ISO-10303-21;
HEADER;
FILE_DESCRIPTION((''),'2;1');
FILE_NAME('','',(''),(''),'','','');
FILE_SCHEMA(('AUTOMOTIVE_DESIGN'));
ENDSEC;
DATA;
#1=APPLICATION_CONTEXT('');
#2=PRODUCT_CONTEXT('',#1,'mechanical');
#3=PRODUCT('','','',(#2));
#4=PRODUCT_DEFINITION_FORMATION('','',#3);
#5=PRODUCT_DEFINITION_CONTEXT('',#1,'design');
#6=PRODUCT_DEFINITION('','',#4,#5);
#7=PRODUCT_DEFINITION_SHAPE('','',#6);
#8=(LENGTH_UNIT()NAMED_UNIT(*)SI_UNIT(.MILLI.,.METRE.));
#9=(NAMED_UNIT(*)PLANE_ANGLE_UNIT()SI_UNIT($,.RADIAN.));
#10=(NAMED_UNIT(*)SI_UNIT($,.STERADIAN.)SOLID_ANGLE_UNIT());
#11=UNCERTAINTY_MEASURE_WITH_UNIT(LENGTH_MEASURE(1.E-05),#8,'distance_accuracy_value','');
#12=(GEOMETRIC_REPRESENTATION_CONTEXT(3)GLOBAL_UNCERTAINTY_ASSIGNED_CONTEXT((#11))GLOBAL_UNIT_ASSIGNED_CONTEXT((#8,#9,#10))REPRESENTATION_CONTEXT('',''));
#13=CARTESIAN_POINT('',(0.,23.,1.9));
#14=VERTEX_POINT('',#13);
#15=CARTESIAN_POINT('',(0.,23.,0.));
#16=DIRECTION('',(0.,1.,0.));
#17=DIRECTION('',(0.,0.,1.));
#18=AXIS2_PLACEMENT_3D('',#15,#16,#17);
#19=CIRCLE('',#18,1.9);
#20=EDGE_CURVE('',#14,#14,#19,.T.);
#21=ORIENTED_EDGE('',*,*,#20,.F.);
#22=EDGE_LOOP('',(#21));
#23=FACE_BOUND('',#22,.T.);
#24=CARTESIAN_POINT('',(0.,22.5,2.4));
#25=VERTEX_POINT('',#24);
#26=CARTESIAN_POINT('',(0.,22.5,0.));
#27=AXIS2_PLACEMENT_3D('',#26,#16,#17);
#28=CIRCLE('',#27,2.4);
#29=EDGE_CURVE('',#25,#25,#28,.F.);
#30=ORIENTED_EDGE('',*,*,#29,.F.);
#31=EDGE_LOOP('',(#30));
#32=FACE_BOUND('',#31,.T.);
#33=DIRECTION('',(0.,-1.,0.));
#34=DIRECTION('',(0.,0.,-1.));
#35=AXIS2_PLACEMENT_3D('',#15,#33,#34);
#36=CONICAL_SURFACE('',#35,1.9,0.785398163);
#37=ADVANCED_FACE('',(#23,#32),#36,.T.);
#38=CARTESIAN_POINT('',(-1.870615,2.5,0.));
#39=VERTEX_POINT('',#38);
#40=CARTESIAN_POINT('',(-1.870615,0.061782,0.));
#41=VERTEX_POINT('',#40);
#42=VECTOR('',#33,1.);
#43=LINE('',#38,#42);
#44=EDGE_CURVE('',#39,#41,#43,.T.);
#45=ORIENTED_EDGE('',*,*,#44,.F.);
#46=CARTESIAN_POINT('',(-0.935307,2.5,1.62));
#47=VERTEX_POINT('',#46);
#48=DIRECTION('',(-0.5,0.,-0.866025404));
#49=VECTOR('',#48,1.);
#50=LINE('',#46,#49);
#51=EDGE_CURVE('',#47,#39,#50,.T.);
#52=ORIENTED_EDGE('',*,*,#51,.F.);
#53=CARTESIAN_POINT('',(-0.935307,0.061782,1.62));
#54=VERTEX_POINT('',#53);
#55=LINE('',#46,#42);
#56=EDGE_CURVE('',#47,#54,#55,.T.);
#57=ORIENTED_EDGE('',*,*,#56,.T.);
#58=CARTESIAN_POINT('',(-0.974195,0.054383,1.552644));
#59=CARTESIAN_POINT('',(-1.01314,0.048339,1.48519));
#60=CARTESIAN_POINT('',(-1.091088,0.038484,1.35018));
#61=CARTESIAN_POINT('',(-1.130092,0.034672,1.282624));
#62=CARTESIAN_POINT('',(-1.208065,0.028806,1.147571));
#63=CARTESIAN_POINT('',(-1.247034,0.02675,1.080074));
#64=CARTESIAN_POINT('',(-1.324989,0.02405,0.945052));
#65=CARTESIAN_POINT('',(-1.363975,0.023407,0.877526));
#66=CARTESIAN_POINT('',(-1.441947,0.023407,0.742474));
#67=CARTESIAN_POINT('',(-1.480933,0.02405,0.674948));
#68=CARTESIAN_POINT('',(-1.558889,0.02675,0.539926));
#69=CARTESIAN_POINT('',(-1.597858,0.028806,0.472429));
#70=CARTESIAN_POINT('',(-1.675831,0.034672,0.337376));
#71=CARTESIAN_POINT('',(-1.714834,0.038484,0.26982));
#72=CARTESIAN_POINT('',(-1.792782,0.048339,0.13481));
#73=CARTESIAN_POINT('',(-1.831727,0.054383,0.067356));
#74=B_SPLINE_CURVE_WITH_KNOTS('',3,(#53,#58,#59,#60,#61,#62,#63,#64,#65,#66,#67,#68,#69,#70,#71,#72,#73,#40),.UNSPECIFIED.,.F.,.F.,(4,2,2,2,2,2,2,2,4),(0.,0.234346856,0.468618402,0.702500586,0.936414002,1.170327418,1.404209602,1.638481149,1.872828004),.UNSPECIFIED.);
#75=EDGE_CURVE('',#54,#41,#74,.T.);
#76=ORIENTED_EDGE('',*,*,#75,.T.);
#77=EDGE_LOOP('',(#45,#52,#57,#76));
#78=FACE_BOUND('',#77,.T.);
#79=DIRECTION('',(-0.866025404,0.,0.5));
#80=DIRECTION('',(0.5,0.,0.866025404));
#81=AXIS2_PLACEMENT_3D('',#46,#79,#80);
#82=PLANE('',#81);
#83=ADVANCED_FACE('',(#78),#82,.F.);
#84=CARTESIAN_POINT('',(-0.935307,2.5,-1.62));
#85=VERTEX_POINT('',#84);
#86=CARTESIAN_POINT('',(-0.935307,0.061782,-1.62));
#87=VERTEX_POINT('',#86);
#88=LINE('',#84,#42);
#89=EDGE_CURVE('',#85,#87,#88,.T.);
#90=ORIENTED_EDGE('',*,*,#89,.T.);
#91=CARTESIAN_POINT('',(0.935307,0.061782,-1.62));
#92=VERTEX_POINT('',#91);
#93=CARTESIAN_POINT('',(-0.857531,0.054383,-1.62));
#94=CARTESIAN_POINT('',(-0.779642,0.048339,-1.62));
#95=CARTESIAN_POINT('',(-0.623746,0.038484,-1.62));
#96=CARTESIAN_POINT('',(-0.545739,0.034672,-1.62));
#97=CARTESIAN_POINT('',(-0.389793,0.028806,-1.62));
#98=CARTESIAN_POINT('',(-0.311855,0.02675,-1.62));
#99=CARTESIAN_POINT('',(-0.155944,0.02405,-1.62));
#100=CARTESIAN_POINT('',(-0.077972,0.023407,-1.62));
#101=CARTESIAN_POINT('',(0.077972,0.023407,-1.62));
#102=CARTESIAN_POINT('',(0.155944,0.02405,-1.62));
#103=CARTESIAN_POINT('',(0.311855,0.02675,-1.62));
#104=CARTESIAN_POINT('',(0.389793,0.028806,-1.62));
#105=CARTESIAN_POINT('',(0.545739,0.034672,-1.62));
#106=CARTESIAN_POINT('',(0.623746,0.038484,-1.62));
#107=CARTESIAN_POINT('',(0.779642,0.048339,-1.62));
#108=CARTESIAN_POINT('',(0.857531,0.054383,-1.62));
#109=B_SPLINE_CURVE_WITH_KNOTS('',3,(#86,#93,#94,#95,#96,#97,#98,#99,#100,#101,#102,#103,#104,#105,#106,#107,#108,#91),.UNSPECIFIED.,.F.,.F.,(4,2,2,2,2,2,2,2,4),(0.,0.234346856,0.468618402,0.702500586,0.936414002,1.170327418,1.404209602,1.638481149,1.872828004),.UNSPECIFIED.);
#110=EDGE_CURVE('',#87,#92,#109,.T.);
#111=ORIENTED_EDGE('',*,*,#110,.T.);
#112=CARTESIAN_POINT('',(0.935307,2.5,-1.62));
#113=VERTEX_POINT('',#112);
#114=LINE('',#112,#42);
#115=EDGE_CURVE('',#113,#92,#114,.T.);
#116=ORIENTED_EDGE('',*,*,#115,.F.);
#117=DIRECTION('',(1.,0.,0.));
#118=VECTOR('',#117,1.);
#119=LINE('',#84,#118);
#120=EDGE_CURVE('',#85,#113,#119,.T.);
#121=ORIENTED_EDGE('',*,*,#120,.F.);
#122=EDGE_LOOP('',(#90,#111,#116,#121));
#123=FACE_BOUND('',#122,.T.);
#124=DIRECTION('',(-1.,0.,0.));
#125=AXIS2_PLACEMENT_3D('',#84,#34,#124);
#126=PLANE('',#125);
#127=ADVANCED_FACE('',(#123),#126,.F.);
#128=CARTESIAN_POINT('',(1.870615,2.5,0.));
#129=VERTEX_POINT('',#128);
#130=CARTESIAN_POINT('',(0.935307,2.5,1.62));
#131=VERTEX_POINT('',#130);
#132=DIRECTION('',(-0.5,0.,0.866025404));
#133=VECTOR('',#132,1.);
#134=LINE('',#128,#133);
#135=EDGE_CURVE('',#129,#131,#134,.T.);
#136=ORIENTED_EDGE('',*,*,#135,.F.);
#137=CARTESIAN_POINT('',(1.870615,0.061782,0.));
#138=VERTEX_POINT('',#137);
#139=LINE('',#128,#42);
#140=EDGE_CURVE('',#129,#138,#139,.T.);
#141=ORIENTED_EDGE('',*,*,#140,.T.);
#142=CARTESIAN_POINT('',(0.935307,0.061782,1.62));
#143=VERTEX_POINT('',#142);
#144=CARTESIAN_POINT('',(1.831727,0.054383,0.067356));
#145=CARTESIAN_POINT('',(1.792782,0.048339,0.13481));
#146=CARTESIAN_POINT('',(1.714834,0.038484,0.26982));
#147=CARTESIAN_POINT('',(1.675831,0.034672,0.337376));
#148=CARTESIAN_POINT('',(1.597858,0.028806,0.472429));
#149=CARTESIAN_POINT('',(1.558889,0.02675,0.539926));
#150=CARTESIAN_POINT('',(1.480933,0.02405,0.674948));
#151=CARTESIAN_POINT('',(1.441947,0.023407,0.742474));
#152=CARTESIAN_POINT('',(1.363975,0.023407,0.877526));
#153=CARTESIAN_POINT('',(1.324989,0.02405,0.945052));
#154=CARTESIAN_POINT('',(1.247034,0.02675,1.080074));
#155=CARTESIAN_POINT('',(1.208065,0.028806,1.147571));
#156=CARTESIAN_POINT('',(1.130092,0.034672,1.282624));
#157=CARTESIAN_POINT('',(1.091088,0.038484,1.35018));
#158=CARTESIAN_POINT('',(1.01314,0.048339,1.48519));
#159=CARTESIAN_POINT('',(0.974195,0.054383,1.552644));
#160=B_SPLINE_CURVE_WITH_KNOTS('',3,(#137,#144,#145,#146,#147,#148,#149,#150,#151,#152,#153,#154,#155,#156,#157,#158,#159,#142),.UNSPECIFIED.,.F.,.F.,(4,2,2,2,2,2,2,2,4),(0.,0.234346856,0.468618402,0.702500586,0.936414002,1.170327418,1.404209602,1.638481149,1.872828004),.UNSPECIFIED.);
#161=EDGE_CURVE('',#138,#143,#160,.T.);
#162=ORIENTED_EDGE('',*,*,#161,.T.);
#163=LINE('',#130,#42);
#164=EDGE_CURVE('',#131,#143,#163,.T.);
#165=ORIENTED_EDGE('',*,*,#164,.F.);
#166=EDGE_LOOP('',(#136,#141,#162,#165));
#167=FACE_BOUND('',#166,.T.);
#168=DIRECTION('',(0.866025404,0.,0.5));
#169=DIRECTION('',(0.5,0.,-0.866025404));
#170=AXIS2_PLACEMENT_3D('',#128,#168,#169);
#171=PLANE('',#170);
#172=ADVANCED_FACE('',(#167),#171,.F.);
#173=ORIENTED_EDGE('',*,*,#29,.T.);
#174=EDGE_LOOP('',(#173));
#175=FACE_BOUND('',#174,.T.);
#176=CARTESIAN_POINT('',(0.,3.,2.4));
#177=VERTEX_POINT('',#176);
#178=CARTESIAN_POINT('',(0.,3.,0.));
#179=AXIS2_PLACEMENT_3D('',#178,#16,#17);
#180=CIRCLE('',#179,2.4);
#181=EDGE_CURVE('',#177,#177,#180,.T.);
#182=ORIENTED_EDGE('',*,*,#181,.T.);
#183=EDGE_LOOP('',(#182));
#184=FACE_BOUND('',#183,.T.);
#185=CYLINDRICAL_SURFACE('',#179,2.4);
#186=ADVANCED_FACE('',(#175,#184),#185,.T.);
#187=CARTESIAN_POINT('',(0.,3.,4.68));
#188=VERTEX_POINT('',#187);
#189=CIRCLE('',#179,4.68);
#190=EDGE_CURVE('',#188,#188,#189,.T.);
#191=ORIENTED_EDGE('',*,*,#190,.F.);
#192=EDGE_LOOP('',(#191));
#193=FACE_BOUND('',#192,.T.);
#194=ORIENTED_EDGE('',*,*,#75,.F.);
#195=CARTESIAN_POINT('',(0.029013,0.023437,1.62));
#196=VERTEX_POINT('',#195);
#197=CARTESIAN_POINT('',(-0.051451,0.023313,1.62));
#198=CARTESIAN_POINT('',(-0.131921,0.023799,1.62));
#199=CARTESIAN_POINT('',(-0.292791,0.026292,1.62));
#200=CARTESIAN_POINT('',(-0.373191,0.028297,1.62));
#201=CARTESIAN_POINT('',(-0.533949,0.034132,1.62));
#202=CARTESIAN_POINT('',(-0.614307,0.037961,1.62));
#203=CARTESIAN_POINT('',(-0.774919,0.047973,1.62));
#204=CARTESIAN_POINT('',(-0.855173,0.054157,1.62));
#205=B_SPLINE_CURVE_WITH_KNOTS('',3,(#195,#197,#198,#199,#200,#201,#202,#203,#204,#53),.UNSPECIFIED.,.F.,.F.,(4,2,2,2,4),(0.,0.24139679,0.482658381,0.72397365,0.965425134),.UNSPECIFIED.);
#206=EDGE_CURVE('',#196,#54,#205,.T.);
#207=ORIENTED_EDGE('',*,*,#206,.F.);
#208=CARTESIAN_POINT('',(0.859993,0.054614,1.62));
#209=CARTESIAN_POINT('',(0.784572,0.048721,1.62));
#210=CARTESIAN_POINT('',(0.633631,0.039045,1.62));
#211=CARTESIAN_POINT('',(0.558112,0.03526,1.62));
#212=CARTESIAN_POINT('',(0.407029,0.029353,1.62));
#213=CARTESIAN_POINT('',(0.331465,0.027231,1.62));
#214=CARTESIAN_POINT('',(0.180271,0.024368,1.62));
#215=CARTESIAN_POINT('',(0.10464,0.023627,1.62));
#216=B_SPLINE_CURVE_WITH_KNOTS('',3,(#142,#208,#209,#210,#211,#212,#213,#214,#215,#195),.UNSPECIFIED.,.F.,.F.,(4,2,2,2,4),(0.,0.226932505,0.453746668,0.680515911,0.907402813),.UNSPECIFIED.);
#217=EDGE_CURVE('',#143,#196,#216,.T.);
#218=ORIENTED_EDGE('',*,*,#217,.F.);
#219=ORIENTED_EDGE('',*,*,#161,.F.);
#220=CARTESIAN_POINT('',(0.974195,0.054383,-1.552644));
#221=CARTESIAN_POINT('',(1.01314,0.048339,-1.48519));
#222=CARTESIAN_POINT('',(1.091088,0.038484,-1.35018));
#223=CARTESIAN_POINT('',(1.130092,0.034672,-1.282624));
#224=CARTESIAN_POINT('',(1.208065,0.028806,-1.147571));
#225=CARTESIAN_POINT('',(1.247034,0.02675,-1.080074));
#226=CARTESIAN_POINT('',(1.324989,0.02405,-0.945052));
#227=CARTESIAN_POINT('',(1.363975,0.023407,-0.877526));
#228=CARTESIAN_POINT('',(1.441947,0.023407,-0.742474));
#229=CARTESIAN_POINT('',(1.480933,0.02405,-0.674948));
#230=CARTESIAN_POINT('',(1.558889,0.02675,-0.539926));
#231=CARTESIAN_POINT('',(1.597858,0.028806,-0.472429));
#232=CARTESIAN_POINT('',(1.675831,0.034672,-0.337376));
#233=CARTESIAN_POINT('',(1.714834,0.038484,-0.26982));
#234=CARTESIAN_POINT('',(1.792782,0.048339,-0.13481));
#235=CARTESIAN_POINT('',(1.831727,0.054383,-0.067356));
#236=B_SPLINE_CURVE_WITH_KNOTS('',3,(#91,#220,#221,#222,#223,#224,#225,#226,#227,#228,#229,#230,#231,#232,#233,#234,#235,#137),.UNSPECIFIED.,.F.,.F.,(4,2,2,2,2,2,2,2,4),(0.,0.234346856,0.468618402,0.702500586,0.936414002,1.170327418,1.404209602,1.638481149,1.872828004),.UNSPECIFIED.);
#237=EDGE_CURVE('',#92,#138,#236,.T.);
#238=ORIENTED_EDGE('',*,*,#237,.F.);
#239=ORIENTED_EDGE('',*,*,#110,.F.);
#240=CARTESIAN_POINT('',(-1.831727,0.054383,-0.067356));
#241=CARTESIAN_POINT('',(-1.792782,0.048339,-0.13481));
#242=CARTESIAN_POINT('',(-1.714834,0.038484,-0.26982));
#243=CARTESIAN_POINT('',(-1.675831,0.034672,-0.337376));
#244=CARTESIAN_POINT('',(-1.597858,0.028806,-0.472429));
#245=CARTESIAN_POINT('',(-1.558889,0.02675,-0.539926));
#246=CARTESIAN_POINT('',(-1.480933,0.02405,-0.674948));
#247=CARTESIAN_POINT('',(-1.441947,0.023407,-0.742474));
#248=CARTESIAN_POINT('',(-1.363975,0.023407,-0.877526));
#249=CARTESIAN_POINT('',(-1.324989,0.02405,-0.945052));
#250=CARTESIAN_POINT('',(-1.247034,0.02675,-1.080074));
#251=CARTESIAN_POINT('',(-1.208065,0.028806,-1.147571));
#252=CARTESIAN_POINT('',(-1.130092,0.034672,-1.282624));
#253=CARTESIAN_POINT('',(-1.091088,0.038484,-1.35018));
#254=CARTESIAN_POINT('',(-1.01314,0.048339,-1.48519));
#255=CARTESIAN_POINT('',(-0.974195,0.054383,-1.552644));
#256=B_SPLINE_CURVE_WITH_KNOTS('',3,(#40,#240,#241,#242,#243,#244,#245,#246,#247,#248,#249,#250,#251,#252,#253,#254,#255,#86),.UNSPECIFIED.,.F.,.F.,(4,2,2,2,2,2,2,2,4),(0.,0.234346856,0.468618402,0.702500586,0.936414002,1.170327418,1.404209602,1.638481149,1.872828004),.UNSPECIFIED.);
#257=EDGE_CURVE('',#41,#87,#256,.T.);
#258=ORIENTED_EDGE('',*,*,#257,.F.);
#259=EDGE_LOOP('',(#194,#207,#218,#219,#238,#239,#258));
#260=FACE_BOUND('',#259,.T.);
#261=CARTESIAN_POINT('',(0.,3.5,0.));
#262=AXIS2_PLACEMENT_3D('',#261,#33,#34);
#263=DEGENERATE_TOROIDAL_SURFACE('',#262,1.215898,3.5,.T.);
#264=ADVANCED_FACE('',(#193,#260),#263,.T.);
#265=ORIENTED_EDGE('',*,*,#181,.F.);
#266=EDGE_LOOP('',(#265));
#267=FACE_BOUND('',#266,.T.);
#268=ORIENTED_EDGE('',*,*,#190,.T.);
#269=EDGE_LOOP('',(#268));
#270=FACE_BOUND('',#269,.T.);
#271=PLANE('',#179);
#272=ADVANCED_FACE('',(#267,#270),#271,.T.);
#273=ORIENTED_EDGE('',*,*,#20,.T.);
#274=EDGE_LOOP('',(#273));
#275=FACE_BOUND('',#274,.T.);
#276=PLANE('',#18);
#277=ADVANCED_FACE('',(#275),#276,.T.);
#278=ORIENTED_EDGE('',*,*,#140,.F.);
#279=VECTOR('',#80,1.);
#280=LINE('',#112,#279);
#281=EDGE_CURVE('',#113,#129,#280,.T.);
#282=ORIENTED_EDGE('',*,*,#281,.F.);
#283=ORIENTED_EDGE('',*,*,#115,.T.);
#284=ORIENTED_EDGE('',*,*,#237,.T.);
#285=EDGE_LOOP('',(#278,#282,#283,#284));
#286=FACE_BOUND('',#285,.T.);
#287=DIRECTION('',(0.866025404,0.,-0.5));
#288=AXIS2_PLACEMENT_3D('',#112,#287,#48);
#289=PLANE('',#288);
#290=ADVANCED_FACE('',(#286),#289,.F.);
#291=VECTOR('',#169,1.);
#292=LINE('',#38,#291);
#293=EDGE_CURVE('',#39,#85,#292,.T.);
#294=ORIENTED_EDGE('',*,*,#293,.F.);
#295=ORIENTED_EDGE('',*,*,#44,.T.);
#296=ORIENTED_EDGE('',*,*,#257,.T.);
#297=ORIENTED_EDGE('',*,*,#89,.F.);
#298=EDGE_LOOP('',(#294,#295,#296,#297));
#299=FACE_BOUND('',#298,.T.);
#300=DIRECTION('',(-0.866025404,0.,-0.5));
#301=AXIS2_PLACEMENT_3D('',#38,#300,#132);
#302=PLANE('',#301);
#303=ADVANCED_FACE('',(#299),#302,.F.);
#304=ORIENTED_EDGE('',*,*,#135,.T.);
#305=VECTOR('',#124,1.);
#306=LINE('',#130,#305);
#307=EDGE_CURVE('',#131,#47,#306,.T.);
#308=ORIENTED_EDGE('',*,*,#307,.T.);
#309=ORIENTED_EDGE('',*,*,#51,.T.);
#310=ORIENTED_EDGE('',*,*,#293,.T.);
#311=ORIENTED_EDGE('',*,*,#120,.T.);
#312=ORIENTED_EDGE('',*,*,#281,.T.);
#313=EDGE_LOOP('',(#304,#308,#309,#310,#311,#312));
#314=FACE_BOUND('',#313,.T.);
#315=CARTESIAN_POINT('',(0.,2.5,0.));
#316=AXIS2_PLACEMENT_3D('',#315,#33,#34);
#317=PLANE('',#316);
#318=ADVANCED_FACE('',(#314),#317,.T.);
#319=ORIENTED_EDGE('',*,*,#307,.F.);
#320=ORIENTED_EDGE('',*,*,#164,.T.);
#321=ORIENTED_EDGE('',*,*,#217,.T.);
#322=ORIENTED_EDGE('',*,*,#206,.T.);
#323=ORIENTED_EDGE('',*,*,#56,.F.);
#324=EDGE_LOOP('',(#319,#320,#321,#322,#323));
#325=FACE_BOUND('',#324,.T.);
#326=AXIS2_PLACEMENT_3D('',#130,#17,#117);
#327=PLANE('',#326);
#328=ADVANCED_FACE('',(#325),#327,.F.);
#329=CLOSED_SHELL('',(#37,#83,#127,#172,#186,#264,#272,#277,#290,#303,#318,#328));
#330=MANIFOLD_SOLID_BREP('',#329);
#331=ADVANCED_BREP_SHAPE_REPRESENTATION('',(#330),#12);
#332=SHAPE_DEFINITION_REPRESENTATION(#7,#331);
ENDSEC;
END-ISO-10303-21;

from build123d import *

# Parameters (mm, degrees)
SKETCH1_R           = 4.68
BOSS_EXTRUDE1_DEPTH = 23
SKETCH2_OUTSIDE_W   = 16.668
SKETCH2_OUTSIDE_H   = 16.668
SKETCH2_OUTSIDE_R   = 2.4
CUT_EXTRUDE1_DEPTH  = 20
CHAMFER1_SIZE       = 0.5
CUT_EXTRUDE2_DEPTH  = 2.5
FILLET1_R           = 3.5


with BuildPart() as part:
    # Sketch1 → Boss-Extrude1 (new body)
    with BuildSketch(Plane(origin=(0, 0, 0), x_dir=(1, 0, 0), z_dir=(0, 1, 0))):
        with Locations(Location((0, 0, 0), (0, 0, 270))):
            Circle(SKETCH1_R)
    extrude(amount=BOSS_EXTRUDE1_DEPTH)

    # Sketch2 outside → Cut-Extrude1 (cut)
    with BuildSketch(Plane(origin=(0, 23, 0), x_dir=(1, 0, 0), z_dir=(0, 1, 0))):
        Rectangle(SKETCH2_OUTSIDE_W, SKETCH2_OUTSIDE_H)
        with Locations(Location((0, 0, 0), (0, 0, 270))):
            Circle(SKETCH2_OUTSIDE_R, mode=Mode.SUBTRACT)
    extrude(amount=-CUT_EXTRUDE1_DEPTH, mode=Mode.SUBTRACT)

    # Chamfer1
    chamfer1_edges = [part.edges().sort_by_distance(p)[0] for p in [
        (0, 23, -2.4),
    ]]
    chamfer(chamfer1_edges, length=CHAMFER1_SIZE)

    # Sketch8 → Cut-Extrude2 (cut)
    with BuildSketch(Plane.XZ):
        Polygon((1.870614872, 0), (0.935307436, 1.62), (-0.935307436, 1.62), (-1.870614872, 0), (-0.935307436, -1.62), (0.935307436, -1.62), align=None)
    extrude(amount=-CUT_EXTRUDE2_DEPTH, mode=Mode.SUBTRACT)

    # Fillet1
    # the kernel refuses this fillet: 3.5 mm, written as the material it takes off along each edge
    with BuildSketch(Plane(origin=(0, 0, 0), x_dir=(0, 0, 1), z_dir=(-1, 0, 0))) as fillet1_piece_1:
        with BuildLine():
            CenterArc((1.215898385, 3.5), FILLET1_R, 270, 81.786789298)
            Line((1.215898385, 0), (1.215898385, -0.07))
            Line((1.215898385, -0.07), (4.68, -0.07))
            Line((4.68, -0.07), (4.75, 0))
            ThreePointArc((4.75, 0), (4.75, 1.5), (4.749282032, 2.99))
            Line((4.749282032, 2.99), (4.68, 3))
        make_face()
    revolve(axis=Axis((0, 0, 0), (0, 1, 0)), mode=Mode.SUBTRACT)


solid = part.part
